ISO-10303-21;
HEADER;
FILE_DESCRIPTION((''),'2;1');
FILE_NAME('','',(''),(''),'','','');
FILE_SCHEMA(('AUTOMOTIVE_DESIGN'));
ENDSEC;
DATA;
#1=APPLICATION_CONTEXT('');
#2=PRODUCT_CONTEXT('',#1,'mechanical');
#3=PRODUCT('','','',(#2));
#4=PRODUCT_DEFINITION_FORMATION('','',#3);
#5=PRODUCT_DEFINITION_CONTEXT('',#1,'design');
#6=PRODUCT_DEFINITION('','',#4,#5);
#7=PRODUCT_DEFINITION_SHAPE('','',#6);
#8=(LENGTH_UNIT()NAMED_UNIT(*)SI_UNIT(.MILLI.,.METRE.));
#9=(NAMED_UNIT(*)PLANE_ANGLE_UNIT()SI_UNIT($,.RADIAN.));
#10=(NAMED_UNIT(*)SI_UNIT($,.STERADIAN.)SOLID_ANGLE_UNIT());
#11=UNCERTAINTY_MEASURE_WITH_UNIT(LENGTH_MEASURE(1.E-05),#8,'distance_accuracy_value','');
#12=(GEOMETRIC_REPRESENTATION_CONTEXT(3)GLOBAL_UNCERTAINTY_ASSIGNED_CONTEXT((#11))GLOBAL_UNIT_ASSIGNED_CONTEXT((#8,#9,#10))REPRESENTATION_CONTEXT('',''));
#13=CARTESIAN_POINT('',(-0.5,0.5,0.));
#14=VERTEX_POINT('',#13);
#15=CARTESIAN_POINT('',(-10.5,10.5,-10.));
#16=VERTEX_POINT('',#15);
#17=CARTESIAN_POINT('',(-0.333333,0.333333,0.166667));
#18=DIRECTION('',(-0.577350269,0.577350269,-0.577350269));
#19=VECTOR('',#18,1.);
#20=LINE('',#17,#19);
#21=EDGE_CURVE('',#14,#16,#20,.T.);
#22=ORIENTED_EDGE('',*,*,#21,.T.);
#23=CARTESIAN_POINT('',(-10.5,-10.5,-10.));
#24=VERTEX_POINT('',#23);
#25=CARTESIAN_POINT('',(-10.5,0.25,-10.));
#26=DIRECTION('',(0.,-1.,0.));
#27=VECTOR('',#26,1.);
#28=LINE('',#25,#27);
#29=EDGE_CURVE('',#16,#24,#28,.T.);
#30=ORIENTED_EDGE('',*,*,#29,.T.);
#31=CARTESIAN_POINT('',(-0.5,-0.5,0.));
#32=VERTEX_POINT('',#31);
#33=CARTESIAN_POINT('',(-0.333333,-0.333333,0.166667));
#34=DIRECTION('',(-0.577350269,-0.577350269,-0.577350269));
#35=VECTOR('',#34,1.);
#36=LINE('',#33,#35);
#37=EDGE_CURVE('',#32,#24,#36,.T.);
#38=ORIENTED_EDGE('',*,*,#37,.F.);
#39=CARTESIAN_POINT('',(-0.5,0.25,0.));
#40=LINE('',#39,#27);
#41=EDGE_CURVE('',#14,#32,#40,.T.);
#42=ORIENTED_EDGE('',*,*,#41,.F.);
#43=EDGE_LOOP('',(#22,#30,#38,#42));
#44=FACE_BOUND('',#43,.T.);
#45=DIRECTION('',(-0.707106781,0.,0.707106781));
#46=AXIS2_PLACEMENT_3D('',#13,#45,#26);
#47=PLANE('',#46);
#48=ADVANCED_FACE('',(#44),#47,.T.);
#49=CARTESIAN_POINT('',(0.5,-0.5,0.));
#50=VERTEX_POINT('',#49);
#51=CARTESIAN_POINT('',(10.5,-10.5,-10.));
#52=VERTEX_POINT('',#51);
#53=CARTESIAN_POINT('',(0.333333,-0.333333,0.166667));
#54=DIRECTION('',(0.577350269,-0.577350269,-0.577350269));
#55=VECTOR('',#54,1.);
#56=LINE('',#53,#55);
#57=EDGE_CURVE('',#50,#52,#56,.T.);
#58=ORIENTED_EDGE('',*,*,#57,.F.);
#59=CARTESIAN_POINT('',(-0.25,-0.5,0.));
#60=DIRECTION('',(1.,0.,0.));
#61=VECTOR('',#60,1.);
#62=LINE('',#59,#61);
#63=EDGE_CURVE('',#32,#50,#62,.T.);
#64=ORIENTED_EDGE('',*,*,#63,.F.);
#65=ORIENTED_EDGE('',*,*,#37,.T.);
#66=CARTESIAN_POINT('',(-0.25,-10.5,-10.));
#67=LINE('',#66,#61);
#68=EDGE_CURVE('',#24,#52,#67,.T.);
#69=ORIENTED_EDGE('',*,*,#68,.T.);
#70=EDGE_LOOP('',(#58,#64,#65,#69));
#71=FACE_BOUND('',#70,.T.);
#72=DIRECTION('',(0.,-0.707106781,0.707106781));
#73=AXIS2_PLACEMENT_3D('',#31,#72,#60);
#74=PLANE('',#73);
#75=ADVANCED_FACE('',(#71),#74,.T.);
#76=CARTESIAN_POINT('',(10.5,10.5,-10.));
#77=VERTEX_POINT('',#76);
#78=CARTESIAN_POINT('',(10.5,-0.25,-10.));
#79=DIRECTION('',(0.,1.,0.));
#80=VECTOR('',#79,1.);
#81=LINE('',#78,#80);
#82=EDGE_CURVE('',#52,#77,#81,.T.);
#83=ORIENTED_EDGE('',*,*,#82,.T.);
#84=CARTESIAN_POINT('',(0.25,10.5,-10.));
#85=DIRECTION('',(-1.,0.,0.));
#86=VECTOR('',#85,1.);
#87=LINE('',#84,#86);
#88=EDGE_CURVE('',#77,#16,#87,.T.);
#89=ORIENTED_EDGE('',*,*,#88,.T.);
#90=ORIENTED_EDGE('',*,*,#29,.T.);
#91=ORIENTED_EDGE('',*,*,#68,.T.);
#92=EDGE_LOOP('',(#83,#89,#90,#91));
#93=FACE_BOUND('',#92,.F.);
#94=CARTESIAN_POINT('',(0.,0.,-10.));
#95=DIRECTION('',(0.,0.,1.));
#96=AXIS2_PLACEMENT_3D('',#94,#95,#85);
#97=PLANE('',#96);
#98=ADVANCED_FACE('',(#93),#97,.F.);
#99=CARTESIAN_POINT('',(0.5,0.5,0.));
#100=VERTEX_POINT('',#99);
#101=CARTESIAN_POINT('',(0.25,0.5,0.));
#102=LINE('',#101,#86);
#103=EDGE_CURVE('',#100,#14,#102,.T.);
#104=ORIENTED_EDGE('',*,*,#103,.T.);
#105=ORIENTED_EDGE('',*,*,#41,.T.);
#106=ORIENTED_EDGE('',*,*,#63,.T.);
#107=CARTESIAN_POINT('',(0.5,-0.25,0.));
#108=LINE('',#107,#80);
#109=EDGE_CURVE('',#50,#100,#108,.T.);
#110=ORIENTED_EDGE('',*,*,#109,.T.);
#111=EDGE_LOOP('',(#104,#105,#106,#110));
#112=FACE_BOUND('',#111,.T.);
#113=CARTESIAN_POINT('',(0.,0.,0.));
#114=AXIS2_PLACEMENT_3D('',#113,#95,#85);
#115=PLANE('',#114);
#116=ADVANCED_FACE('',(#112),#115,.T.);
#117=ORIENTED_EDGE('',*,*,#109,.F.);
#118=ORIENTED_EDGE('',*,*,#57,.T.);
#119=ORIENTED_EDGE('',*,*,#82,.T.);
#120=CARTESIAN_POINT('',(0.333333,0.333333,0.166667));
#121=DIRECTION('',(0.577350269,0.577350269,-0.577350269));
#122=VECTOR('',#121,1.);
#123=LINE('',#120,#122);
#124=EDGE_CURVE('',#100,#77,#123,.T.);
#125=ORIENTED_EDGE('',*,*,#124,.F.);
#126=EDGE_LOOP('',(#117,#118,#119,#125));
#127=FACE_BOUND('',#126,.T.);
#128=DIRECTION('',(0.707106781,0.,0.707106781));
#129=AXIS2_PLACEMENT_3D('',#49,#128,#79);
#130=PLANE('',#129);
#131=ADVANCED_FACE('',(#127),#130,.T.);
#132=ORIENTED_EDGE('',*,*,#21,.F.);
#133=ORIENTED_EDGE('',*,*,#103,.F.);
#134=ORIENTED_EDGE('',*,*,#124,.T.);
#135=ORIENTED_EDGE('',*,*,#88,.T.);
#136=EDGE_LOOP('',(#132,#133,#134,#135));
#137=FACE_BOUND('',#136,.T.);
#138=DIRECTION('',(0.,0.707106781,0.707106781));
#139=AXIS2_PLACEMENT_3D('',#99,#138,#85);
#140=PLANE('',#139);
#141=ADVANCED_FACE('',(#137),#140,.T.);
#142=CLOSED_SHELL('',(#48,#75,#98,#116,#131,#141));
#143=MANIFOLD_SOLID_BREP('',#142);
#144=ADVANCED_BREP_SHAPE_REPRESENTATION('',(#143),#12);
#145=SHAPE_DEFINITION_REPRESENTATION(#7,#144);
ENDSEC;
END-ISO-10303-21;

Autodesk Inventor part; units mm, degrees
ref_plane "YZ Plane" through (0, 0, 0) normal (1, 0, 0) x (0, 1, 0)
ref_plane "XZ Plane" through (0, 0, 0) normal (0, 1, 0) x (-1, 0, 0)
ref_plane "XY Plane" through (0, 0, 0) normal (0, 0, 1) x (1, 0, 0)
sketch "Sketch1" plane through (0, 0, 0) normal (0, 1, 0) x (-1, 0, 0)
  line L0 (0.5, 0.5) -> (-0.5, 0.5)
  line L1 (-0.5, 0.5) -> (-0.5, -0.5)
  line L2 (-0.5, -0.5) -> (0.5, -0.5)
  line L3 (0.5, -0.5) -> (0.5, 0.5)
  point P0 (0, 0)
  point P1 (0.5, 0)
  point P2 (0, 0.5)
  dimension "d0" = 1
  dimension "d1" = 1
extrude "Extrusion1" add sketch "Sketch1" against normal blind 10 draft 45
move or copy body "Move Body1" bodies to move or copy 1 copy no rotation origin (0, 0, 0) rotation axis (1, 0, 0) rotation angle 90
properties part number "runway"
